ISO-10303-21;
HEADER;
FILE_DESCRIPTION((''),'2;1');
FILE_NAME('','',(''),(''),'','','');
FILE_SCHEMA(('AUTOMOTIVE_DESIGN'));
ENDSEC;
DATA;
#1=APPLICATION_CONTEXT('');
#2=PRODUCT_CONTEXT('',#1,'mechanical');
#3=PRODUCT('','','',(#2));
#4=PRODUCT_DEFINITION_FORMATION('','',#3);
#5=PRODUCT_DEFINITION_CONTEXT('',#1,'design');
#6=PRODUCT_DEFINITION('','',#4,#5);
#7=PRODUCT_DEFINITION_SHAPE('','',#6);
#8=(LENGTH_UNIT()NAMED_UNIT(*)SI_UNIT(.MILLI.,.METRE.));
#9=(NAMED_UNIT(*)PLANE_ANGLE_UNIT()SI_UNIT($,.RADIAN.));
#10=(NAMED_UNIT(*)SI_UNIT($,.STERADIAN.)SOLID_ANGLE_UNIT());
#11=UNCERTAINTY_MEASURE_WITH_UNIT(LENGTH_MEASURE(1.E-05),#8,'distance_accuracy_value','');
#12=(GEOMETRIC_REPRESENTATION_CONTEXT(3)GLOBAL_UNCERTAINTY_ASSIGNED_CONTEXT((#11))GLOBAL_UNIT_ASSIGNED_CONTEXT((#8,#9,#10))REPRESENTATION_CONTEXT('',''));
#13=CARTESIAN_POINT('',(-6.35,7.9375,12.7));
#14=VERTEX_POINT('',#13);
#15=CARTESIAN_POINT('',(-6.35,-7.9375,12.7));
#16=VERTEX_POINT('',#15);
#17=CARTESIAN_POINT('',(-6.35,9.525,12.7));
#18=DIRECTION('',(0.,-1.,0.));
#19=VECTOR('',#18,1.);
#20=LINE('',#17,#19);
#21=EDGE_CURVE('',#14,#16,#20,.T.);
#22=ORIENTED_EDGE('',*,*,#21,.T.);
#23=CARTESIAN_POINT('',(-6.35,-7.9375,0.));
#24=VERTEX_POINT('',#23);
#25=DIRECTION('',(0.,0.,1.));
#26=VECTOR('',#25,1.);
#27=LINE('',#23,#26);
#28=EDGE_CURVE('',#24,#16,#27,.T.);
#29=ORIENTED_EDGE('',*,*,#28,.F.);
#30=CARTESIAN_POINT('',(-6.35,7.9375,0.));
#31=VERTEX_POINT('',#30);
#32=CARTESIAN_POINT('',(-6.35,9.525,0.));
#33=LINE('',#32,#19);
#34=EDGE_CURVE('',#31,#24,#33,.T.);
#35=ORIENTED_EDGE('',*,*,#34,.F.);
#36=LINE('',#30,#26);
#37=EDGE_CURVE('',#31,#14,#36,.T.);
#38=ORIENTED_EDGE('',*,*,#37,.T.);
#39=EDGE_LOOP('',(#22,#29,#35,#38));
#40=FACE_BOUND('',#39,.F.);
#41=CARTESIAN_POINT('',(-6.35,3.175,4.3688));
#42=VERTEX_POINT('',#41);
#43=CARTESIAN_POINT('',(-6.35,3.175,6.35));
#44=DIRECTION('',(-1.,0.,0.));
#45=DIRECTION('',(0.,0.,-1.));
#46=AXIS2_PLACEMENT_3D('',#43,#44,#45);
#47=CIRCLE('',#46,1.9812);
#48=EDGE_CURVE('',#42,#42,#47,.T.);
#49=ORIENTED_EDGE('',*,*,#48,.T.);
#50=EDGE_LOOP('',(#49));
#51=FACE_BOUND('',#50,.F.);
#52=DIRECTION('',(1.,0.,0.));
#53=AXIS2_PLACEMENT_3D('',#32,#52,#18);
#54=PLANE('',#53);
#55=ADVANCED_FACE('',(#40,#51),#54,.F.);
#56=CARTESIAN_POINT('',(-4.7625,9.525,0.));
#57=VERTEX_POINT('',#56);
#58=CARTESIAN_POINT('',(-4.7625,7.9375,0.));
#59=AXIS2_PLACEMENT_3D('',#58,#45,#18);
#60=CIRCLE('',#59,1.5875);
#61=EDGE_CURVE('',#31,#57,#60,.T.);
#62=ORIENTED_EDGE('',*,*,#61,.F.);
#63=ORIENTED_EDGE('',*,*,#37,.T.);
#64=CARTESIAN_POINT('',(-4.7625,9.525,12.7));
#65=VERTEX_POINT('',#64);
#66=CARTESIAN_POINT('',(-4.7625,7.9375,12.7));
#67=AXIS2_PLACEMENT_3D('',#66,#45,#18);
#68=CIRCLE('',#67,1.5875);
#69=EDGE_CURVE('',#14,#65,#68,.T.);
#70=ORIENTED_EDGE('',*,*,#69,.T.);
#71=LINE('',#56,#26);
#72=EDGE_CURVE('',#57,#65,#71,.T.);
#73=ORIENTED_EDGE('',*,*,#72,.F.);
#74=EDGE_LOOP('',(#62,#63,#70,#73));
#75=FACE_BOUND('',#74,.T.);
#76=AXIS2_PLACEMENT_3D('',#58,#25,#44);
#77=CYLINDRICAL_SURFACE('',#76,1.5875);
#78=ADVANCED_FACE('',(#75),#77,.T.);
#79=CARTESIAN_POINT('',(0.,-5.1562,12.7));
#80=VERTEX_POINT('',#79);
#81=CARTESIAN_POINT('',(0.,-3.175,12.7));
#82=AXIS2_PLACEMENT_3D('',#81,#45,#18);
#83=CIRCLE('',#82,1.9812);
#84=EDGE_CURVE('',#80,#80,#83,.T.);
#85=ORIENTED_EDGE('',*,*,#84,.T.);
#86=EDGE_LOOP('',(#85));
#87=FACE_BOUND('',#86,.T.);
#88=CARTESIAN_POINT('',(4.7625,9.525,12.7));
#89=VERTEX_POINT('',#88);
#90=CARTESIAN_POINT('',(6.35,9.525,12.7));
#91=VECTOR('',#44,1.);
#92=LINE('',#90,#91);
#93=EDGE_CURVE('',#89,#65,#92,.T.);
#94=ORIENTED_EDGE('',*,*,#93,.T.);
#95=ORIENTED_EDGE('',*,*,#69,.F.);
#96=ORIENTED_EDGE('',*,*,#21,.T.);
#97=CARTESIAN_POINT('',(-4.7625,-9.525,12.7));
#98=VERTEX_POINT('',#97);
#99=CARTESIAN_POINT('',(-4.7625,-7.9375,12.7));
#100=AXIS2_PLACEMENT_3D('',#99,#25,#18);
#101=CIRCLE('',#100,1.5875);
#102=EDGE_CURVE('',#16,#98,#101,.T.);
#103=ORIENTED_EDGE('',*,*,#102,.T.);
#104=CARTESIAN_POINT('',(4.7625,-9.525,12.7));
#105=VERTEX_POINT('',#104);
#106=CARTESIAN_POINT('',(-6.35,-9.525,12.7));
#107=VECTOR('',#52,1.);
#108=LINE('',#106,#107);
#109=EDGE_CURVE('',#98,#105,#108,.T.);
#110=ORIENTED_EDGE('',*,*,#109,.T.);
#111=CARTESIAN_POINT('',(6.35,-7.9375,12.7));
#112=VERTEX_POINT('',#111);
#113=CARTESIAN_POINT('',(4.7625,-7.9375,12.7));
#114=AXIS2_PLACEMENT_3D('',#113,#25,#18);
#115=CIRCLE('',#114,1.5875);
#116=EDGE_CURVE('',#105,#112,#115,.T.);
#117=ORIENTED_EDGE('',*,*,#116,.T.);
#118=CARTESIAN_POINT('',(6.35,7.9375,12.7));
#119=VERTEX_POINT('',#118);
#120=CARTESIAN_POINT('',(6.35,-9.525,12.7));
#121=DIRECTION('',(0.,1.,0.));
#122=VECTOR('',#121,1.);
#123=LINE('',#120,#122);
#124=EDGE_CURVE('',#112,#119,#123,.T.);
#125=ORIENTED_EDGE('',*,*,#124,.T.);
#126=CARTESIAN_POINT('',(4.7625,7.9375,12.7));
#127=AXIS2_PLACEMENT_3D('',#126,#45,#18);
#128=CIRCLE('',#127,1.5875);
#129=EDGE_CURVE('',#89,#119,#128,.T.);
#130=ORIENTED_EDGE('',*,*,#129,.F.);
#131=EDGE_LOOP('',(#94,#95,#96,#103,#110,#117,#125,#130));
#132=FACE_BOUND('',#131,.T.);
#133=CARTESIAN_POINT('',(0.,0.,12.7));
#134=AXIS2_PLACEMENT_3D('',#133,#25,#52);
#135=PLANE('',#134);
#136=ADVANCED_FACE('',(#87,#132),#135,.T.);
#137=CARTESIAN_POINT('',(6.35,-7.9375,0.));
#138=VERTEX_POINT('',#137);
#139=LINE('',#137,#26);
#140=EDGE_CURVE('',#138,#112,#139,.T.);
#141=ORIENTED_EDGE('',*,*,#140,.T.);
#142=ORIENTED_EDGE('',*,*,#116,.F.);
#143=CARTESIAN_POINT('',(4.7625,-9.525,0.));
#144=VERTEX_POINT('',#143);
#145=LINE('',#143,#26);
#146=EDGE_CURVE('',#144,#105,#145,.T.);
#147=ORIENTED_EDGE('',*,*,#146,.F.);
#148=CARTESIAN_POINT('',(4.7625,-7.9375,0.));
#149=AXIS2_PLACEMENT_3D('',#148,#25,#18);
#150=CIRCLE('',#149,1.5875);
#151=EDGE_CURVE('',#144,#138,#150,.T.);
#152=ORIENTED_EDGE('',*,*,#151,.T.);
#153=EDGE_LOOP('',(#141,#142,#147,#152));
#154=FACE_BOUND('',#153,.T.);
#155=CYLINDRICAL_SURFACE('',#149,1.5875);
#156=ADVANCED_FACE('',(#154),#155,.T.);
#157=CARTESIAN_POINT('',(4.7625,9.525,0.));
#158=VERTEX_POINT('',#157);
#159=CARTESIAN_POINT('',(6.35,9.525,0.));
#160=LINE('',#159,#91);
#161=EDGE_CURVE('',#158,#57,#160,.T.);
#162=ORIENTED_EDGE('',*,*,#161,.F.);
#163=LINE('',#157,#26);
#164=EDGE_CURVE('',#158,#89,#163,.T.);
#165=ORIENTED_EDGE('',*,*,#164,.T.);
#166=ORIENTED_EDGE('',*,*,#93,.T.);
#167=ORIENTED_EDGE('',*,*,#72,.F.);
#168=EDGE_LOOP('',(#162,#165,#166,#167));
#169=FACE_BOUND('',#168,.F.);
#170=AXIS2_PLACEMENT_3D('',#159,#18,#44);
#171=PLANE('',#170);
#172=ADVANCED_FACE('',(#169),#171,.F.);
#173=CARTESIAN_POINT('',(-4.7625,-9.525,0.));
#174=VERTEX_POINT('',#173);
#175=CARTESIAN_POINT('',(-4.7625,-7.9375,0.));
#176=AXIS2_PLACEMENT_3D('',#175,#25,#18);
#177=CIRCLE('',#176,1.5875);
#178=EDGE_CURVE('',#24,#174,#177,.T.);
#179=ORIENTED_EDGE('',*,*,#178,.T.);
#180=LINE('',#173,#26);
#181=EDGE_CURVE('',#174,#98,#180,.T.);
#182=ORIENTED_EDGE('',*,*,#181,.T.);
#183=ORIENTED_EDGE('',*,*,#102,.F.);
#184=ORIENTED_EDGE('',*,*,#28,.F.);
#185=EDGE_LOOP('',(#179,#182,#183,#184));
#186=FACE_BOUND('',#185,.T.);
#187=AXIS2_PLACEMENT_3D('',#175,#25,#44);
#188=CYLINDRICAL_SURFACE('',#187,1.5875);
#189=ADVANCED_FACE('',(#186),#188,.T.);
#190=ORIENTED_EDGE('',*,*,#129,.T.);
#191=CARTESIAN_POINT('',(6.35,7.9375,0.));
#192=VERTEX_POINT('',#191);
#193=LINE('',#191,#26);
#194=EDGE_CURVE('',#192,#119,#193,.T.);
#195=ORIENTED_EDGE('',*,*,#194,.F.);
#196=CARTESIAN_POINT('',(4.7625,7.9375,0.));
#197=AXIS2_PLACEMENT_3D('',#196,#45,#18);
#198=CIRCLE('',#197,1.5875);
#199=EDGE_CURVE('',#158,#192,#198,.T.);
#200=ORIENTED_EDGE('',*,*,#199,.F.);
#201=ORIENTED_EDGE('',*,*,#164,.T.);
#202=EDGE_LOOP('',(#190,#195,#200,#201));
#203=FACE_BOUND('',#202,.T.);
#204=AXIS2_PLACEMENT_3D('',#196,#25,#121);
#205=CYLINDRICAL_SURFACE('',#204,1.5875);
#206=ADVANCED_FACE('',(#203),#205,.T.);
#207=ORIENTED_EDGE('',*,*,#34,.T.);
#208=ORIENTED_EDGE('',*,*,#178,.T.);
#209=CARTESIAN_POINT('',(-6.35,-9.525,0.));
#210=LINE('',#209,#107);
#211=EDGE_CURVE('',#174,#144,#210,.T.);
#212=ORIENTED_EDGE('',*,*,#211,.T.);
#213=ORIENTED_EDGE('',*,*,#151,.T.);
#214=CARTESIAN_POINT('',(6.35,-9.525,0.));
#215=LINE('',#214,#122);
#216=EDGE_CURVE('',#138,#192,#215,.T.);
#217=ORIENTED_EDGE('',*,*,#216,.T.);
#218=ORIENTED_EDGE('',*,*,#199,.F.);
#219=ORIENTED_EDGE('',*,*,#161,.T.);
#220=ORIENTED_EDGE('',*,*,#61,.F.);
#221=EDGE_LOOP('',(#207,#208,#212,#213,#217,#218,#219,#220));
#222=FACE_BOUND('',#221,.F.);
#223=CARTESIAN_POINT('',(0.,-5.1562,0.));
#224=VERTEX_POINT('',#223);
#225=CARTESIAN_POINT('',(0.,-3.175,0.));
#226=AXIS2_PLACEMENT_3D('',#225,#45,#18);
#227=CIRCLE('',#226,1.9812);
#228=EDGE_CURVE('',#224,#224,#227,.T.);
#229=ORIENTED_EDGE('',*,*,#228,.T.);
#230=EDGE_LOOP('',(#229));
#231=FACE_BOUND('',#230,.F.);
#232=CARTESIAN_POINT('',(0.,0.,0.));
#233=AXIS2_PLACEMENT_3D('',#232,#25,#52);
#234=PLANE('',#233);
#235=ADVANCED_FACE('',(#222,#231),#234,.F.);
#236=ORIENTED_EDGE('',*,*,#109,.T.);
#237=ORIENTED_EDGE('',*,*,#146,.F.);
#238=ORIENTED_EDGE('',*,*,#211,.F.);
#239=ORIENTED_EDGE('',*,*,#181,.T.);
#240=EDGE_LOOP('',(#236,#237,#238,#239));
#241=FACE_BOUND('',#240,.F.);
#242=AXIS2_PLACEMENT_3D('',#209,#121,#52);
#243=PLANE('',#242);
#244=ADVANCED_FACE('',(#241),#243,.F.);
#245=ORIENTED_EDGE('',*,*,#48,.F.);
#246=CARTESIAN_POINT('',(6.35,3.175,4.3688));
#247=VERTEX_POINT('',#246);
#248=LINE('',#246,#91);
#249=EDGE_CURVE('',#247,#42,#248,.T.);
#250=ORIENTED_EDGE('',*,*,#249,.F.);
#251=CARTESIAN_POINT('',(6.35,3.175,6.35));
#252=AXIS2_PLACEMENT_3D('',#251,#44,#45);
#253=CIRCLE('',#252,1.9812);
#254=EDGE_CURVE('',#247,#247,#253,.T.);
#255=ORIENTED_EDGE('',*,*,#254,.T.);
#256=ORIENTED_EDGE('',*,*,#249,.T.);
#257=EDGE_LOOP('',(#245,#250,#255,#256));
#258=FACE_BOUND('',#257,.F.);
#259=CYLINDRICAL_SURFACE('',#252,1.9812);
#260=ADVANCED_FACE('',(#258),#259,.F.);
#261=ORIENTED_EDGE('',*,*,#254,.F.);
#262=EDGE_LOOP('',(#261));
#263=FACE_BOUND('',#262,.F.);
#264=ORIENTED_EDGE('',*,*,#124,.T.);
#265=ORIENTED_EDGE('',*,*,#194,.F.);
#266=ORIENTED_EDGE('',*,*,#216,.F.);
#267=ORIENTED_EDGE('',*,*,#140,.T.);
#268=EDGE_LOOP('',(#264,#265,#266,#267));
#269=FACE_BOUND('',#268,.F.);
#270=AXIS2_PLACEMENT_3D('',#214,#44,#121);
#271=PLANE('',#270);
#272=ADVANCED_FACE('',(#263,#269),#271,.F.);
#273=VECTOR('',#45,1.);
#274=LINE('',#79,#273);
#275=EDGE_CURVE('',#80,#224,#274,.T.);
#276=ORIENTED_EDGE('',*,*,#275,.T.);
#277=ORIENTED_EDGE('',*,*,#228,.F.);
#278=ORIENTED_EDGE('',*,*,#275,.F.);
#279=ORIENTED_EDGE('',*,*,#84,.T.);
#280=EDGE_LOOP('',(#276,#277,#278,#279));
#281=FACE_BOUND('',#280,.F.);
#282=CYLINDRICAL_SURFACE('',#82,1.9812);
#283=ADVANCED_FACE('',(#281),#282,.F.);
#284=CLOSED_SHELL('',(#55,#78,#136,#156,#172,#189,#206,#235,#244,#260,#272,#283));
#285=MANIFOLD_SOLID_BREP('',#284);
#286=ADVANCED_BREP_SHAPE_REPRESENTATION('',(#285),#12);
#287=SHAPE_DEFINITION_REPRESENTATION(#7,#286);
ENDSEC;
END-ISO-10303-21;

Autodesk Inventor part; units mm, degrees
ref_plane "YZ Plane" through (0, 0, 0) normal (1, 0, 0) x (0, 1, 0)
ref_plane "XZ Plane" through (0, 0, 0) normal (0, 1, 0) x (-1, 0, 0)
ref_plane "XY Plane" through (0, 0, 0) normal (0, 0, 1) x (1, 0, 0)
sketch "Sketch1" plane through (0, 0, 0) normal (0, 0, 1) x (1, 0, 0)
  line L0 (-6.35, -9.525) -> (6.35, -9.525)
  line L1 (6.35, -9.525) -> (6.35, 9.525)
  line L2 (6.35, 9.525) -> (-6.35, 9.525)
  line L3 (-6.35, 9.525) -> (-6.35, -9.525)
  line L4 (-6.35, -9.525) -> (6.35, 9.525) construction
  line L5 (6.35, -9.525) -> (-6.35, 9.525) construction
  point P0 (0, 0)
  dimension "d0" = 12.7
  dimension "d1" = 19.05
extrude "Plate1" add sketch "Sketch1" along normal blind 12.7
sketch "Sketch2" plane through (6.35, -9.525, 0) normal (1, 0, 0) x (0, 0, -1)
  line L0 (0, 19.05) -> (-12.7, 19.05) projected
  line L1 (0, 0) -> (0, 19.05) projected
  point P0 (0, 9.525)
  point P1 (-6.35, 12.7)
  dimension "d3" = 6.35
  dimension "d4" = 6.35
hole "Hole1" at (6.35, 3.175, 6.35) direction (-1, 0, 0) diameter 3.9624 depth 12.7 tip angle 118 thread size "10-32 UNF" class "2B" standard "ANSI Unified Screw Threads"
sketch "Sketch3" plane through (0, 0, 12.7) normal (0, 0, 1) x (1, 0, 0)
  line L0 (6.35, -9.525) -> (-6.35, -9.525) projected
  point P0 (0, 0)
  point P1 (0, -3.175)
  dimension "d12" = 6.35
hole "Hole2" at (0, -3.175, 12.7) direction (0, 0, -1) diameter 3.9624 depth 12.7 tip angle 118 thread size "10-32 UNF" class "2B" standard "ANSI Unified Screw Threads"
fillet "Corner Round1" radius 1.5875 4 edges at (6.35, -9.525, 6.35) (-6.35, 9.525, 6.35) (6.35, 9.525, 6.35) (-6.35, -9.525, 6.35)
equation "\"d10\" = Thickness"
equation "\"d18\" = Thickness"
equation "\"d2\" = Thickness"
equation "\"BendRadius\" = Thickness"
equation "\"BendReliefWidth\" = Thickness"
equation "\"BendReliefDepth\" = 0.5 * Thickness"
equation "\"CornerReliefSize\" = 4 * Thickness"
equation "\"MinimumRemnant\" = 2 * Thickness"
equation "\"TransitionRadius\" = BendRadius"
equation "\"JacobiRadiusSize\" = BendRadius"
equation "\"GapSize\" = Thickness"
equation "\"Thickness\" = 12.7"
properties part number "PLATE,NUT-BLOCK,1-LONG" material "Aluminum 6061"
